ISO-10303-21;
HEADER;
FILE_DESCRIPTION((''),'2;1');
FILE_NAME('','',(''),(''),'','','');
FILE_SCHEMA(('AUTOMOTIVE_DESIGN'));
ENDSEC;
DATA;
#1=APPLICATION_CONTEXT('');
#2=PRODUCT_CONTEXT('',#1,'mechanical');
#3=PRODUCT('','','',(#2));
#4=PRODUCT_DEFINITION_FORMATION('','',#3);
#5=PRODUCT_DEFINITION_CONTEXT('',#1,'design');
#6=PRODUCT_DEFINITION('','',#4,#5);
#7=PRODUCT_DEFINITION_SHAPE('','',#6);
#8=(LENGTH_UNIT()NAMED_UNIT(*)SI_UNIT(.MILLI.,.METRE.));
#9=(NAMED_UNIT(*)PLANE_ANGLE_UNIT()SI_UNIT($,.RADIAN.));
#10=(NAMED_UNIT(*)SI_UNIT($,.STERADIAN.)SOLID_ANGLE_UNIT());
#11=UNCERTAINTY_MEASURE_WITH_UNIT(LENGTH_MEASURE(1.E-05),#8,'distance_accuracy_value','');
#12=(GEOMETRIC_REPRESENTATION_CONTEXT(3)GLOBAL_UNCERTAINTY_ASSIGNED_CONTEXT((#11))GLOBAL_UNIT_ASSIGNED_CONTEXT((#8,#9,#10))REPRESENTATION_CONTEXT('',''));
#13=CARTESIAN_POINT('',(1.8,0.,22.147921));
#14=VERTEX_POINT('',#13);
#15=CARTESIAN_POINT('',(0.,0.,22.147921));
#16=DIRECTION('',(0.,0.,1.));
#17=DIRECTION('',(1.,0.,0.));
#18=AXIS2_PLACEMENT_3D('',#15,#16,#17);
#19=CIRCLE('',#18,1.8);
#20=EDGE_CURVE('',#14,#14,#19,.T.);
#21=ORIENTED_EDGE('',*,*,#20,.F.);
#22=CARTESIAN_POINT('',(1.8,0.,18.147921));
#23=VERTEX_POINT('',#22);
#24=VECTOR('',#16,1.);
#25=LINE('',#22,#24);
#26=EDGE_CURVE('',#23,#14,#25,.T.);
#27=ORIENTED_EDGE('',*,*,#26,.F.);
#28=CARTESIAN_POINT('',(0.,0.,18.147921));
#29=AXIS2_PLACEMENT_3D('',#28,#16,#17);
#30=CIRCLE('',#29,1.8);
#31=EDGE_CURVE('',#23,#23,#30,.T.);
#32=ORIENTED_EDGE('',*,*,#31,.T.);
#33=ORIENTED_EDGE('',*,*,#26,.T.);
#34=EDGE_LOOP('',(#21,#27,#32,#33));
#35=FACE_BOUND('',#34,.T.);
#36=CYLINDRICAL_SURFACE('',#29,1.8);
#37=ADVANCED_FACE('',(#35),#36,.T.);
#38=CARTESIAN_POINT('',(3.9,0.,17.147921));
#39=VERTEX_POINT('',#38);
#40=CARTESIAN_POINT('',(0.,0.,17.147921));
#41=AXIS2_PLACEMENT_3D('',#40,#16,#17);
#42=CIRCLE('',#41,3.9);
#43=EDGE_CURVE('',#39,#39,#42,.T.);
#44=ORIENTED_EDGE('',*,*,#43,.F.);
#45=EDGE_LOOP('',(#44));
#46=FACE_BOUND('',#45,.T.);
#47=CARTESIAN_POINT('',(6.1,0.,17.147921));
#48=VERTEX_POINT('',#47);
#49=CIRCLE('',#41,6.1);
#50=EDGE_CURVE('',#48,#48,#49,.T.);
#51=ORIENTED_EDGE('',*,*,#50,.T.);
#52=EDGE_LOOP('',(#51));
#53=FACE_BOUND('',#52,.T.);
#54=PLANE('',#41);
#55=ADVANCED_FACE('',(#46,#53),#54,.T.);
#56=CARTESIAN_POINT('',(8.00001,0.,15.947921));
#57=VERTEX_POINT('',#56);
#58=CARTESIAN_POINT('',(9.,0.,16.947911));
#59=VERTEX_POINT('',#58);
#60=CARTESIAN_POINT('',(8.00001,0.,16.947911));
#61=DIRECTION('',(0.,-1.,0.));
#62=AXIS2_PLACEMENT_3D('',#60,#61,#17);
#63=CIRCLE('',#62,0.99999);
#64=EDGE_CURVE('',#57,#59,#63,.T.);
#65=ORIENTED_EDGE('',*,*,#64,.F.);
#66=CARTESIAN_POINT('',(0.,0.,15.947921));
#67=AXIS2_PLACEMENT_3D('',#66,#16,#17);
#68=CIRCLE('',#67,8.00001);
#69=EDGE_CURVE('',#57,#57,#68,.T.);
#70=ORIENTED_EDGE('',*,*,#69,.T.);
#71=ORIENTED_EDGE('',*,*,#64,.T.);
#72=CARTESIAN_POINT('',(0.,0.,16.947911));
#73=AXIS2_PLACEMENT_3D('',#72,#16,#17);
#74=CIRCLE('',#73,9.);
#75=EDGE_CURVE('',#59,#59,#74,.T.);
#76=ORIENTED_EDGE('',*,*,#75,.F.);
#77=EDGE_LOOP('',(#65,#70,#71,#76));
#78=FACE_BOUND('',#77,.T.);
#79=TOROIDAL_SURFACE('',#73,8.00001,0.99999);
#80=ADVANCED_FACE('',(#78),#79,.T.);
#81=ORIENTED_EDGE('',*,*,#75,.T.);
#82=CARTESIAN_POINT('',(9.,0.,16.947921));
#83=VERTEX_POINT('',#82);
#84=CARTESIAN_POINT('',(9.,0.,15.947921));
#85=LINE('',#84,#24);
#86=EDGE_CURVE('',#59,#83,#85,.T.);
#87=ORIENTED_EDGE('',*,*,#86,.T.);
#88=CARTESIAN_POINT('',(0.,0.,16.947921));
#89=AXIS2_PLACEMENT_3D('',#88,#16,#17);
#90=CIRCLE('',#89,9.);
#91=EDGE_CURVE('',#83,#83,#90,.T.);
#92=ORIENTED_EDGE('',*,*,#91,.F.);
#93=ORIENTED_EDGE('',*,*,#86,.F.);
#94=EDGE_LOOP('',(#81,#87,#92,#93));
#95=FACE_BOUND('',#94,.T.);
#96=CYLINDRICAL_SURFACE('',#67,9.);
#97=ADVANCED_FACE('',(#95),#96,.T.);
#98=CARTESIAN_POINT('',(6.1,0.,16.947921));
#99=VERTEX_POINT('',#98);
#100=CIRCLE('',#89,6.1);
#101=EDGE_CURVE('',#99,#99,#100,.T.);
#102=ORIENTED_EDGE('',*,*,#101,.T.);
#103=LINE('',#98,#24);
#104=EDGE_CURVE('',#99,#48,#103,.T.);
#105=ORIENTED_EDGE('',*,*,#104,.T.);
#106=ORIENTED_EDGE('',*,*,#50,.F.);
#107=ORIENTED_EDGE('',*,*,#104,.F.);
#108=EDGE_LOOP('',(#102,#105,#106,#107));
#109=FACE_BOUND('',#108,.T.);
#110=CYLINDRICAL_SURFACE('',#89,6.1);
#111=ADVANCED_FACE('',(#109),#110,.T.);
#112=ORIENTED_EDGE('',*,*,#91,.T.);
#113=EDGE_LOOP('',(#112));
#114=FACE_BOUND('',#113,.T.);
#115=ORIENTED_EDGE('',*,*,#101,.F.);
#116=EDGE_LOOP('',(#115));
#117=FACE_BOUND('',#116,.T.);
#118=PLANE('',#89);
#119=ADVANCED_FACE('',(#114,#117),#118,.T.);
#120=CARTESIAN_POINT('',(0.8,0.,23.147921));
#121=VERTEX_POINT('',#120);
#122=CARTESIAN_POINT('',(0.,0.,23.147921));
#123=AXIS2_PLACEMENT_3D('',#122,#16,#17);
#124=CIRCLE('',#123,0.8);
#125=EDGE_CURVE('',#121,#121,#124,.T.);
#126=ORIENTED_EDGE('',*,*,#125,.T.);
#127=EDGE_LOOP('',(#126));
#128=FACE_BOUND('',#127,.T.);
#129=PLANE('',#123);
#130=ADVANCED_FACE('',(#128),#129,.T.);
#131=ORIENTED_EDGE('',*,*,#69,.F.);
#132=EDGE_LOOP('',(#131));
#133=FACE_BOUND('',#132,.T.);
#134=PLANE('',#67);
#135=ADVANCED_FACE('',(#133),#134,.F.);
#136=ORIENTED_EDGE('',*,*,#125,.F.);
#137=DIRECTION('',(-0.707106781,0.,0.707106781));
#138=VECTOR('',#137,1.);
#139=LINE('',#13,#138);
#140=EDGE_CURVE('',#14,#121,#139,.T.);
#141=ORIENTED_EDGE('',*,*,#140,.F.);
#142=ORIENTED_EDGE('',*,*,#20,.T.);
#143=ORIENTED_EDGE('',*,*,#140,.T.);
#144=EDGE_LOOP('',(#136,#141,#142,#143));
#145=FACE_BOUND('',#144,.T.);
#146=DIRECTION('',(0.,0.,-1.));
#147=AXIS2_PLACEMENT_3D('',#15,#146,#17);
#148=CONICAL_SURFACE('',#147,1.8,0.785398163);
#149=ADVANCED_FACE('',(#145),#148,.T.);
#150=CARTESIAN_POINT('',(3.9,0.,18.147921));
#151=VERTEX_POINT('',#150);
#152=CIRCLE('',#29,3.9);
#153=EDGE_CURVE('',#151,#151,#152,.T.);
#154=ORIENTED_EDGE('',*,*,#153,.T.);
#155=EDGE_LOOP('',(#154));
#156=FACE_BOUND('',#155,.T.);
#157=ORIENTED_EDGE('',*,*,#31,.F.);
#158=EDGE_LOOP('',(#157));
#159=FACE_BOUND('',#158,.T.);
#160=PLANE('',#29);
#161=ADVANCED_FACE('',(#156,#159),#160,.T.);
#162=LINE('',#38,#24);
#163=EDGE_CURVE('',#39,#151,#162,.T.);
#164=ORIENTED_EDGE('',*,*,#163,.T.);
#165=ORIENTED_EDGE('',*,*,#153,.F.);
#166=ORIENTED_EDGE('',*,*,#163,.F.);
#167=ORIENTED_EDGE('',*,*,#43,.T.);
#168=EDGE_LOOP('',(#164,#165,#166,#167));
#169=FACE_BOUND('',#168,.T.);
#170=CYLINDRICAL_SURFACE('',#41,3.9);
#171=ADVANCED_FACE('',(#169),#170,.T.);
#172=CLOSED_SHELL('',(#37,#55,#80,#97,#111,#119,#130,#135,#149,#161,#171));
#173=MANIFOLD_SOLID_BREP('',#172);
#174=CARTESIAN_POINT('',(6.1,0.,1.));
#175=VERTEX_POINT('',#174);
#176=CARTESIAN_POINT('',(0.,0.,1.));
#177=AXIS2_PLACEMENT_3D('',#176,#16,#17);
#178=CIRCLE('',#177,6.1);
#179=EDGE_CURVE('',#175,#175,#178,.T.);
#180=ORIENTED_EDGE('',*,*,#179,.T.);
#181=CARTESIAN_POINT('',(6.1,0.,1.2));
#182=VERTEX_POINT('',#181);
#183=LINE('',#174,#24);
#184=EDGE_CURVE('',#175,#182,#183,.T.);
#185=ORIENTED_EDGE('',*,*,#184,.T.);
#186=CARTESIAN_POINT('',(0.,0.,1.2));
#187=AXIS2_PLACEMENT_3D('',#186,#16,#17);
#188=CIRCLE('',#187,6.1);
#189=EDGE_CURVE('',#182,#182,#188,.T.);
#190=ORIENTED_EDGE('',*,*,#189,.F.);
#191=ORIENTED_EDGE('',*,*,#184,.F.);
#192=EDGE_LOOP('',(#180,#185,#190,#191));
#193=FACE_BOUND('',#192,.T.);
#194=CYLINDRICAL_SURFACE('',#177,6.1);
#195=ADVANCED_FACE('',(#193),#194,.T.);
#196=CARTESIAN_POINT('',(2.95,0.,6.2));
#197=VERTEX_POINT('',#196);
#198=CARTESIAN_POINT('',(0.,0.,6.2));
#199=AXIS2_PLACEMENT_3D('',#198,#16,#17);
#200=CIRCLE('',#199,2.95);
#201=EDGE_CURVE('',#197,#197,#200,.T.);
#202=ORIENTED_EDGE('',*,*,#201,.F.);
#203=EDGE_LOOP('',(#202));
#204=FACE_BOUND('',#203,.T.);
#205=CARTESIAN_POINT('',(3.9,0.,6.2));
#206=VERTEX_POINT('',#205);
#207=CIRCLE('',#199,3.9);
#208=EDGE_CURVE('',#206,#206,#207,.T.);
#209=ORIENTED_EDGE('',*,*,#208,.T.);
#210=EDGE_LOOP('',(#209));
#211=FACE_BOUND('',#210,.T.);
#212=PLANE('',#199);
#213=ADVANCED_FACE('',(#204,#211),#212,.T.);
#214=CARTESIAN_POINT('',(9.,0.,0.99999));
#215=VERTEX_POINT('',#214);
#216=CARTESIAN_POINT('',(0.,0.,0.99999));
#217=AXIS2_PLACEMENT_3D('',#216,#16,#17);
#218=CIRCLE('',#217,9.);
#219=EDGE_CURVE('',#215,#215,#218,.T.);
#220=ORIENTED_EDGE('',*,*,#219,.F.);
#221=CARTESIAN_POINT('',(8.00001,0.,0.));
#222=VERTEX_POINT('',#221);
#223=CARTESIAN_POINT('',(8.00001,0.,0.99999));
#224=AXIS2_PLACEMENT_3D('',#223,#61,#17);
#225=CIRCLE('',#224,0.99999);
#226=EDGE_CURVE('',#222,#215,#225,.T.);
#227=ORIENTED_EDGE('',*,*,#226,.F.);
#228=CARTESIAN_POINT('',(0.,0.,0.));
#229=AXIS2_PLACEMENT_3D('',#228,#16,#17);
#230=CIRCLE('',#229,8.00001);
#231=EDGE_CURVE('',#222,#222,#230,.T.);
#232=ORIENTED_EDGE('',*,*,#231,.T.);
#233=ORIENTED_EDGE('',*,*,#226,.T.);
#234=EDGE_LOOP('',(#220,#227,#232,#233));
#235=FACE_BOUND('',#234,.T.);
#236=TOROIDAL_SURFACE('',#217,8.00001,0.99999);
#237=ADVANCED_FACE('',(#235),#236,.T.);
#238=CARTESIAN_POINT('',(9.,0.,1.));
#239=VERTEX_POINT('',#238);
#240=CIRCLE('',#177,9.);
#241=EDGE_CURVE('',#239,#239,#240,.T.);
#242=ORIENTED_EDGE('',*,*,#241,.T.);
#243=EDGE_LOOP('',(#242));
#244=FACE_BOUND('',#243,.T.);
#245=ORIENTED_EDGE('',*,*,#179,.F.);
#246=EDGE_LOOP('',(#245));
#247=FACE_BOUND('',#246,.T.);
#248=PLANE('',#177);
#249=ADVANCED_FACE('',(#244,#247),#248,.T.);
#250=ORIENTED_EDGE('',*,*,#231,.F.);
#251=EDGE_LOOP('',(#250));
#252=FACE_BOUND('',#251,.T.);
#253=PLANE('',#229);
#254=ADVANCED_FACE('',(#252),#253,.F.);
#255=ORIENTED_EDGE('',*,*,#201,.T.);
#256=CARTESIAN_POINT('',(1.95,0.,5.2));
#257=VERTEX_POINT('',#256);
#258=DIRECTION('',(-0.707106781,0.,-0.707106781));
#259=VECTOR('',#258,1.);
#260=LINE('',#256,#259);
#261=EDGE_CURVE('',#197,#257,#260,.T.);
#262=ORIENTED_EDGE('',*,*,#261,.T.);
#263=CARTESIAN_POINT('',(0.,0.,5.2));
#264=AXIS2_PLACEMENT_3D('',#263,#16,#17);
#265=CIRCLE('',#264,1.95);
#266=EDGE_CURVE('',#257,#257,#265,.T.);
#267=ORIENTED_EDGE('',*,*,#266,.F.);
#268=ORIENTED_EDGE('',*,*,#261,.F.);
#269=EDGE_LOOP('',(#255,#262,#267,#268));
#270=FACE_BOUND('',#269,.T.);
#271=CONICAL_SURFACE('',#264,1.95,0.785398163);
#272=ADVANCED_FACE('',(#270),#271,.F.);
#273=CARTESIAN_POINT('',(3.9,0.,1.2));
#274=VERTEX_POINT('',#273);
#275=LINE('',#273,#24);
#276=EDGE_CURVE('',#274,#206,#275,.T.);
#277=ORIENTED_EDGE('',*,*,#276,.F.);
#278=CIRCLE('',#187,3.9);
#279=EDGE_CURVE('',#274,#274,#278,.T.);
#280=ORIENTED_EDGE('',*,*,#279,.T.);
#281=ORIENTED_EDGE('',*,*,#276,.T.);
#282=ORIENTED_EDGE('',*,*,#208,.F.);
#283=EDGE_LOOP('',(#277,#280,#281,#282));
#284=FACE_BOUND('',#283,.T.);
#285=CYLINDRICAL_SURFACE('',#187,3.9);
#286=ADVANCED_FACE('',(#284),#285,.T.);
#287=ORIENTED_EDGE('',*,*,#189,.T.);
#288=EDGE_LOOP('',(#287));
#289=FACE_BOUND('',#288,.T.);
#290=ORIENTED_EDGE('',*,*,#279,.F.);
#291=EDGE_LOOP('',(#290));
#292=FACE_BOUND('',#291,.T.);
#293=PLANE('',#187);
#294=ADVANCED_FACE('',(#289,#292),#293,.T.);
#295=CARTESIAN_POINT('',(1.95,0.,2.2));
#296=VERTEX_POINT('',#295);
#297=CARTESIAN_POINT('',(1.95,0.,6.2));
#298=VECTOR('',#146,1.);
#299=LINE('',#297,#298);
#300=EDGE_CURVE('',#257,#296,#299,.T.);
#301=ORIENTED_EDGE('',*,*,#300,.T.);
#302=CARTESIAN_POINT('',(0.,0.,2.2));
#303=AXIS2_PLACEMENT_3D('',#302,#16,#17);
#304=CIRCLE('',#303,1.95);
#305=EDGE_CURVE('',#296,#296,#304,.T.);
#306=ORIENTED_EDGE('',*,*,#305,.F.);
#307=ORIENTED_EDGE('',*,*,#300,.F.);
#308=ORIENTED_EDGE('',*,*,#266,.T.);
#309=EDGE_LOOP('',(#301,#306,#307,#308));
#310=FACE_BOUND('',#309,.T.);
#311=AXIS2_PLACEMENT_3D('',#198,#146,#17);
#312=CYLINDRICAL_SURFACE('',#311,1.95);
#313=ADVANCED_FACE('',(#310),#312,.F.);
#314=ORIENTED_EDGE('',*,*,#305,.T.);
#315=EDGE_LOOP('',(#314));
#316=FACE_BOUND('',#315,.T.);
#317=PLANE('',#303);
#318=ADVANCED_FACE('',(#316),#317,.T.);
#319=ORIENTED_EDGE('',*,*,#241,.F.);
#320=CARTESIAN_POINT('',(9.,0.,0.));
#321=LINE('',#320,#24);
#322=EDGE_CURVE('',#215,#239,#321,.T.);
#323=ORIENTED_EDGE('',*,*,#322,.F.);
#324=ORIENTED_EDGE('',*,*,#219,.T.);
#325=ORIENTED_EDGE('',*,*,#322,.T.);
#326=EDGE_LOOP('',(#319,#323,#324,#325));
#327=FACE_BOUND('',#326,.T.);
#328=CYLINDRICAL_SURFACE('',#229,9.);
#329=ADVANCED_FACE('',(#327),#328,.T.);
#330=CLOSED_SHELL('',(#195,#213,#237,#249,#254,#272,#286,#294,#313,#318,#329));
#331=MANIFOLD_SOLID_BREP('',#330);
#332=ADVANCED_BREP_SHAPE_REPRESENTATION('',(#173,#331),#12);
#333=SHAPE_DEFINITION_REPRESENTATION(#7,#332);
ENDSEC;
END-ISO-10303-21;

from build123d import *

# Parameters (mm, degrees)
F2_R    = 0.99999
F3_SIZE = 1
F6_R    = 0.99999
F7_SIZE = 1


# Not quite as in the source:
# - a fillet or chamfer is up to 0.001 mm smaller than in the source, because OpenCascade refuses the exact size


with BuildPart() as f1:
    # F0 (on Front) → F1 (revolve)
    with BuildSketch(Plane.XZ):
        Polygon((0, 1), (0, 0), (9, 0), (9, 1), (6.1, 1), (6.1, 1.2), (3.9, 1.2), (3.9, 6.2), (1.95, 6.2), (1.95, 2.2), (0, 2.2), (0, 1.7075754004), align=None)
    revolve(axis=Axis((0, 0, 1.9537877002), (0, 0, 1)))

    # F2 (radius 1 in the source; OpenCascade refuses exactly that, so slightly less here)
    f2_edges = [f1.edges().sort_by_distance(p)[0] for p in [
        (-9, 0, 0),
    ]]
    fillet(f2_edges, radius=F2_R)

    # F3
    f3_edges = [f1.edges().sort_by_distance(p)[0] for p in [
        (-1.95, 0, 6.2),
    ]]
    chamfer(f3_edges, length=F3_SIZE)


with BuildPart() as f5:
    # F4 (on Front) → F5 (revolve)
    with BuildSketch(Plane.XZ):
        Polygon((0, 16.9479211028), (0, 15.9479211028), (9, 15.9479211028), (9, 16.9479211028), (6.1, 16.9479211028), (6.1, 17.1479211028), (3.9, 17.1479211028), (3.9, 18.1479211028), (1.8, 18.1479211028), (1.8, 23.1479211028), (0, 23.1479211028), (0, 18.1479211028), (0, 17.1479211028), align=None)
    revolve(axis=Axis((0, 0, 17.6479211028), (0, 0, 1)))

    # F6 (radius 1 in the source; OpenCascade refuses exactly that, so slightly less here)
    f6_edges = [f5.edges().sort_by_distance(p)[0] for p in [
        (-9, 0, 15.947921),
    ]]
    fillet(f6_edges, radius=F6_R)

    # F7
    f7_edges = [f5.edges().sort_by_distance(p)[0] for p in [
        (-1.8, 0, 23.147921),
    ]]
    chamfer(f7_edges, length=F7_SIZE)


solid = Compound([f1.part, f5.part])
